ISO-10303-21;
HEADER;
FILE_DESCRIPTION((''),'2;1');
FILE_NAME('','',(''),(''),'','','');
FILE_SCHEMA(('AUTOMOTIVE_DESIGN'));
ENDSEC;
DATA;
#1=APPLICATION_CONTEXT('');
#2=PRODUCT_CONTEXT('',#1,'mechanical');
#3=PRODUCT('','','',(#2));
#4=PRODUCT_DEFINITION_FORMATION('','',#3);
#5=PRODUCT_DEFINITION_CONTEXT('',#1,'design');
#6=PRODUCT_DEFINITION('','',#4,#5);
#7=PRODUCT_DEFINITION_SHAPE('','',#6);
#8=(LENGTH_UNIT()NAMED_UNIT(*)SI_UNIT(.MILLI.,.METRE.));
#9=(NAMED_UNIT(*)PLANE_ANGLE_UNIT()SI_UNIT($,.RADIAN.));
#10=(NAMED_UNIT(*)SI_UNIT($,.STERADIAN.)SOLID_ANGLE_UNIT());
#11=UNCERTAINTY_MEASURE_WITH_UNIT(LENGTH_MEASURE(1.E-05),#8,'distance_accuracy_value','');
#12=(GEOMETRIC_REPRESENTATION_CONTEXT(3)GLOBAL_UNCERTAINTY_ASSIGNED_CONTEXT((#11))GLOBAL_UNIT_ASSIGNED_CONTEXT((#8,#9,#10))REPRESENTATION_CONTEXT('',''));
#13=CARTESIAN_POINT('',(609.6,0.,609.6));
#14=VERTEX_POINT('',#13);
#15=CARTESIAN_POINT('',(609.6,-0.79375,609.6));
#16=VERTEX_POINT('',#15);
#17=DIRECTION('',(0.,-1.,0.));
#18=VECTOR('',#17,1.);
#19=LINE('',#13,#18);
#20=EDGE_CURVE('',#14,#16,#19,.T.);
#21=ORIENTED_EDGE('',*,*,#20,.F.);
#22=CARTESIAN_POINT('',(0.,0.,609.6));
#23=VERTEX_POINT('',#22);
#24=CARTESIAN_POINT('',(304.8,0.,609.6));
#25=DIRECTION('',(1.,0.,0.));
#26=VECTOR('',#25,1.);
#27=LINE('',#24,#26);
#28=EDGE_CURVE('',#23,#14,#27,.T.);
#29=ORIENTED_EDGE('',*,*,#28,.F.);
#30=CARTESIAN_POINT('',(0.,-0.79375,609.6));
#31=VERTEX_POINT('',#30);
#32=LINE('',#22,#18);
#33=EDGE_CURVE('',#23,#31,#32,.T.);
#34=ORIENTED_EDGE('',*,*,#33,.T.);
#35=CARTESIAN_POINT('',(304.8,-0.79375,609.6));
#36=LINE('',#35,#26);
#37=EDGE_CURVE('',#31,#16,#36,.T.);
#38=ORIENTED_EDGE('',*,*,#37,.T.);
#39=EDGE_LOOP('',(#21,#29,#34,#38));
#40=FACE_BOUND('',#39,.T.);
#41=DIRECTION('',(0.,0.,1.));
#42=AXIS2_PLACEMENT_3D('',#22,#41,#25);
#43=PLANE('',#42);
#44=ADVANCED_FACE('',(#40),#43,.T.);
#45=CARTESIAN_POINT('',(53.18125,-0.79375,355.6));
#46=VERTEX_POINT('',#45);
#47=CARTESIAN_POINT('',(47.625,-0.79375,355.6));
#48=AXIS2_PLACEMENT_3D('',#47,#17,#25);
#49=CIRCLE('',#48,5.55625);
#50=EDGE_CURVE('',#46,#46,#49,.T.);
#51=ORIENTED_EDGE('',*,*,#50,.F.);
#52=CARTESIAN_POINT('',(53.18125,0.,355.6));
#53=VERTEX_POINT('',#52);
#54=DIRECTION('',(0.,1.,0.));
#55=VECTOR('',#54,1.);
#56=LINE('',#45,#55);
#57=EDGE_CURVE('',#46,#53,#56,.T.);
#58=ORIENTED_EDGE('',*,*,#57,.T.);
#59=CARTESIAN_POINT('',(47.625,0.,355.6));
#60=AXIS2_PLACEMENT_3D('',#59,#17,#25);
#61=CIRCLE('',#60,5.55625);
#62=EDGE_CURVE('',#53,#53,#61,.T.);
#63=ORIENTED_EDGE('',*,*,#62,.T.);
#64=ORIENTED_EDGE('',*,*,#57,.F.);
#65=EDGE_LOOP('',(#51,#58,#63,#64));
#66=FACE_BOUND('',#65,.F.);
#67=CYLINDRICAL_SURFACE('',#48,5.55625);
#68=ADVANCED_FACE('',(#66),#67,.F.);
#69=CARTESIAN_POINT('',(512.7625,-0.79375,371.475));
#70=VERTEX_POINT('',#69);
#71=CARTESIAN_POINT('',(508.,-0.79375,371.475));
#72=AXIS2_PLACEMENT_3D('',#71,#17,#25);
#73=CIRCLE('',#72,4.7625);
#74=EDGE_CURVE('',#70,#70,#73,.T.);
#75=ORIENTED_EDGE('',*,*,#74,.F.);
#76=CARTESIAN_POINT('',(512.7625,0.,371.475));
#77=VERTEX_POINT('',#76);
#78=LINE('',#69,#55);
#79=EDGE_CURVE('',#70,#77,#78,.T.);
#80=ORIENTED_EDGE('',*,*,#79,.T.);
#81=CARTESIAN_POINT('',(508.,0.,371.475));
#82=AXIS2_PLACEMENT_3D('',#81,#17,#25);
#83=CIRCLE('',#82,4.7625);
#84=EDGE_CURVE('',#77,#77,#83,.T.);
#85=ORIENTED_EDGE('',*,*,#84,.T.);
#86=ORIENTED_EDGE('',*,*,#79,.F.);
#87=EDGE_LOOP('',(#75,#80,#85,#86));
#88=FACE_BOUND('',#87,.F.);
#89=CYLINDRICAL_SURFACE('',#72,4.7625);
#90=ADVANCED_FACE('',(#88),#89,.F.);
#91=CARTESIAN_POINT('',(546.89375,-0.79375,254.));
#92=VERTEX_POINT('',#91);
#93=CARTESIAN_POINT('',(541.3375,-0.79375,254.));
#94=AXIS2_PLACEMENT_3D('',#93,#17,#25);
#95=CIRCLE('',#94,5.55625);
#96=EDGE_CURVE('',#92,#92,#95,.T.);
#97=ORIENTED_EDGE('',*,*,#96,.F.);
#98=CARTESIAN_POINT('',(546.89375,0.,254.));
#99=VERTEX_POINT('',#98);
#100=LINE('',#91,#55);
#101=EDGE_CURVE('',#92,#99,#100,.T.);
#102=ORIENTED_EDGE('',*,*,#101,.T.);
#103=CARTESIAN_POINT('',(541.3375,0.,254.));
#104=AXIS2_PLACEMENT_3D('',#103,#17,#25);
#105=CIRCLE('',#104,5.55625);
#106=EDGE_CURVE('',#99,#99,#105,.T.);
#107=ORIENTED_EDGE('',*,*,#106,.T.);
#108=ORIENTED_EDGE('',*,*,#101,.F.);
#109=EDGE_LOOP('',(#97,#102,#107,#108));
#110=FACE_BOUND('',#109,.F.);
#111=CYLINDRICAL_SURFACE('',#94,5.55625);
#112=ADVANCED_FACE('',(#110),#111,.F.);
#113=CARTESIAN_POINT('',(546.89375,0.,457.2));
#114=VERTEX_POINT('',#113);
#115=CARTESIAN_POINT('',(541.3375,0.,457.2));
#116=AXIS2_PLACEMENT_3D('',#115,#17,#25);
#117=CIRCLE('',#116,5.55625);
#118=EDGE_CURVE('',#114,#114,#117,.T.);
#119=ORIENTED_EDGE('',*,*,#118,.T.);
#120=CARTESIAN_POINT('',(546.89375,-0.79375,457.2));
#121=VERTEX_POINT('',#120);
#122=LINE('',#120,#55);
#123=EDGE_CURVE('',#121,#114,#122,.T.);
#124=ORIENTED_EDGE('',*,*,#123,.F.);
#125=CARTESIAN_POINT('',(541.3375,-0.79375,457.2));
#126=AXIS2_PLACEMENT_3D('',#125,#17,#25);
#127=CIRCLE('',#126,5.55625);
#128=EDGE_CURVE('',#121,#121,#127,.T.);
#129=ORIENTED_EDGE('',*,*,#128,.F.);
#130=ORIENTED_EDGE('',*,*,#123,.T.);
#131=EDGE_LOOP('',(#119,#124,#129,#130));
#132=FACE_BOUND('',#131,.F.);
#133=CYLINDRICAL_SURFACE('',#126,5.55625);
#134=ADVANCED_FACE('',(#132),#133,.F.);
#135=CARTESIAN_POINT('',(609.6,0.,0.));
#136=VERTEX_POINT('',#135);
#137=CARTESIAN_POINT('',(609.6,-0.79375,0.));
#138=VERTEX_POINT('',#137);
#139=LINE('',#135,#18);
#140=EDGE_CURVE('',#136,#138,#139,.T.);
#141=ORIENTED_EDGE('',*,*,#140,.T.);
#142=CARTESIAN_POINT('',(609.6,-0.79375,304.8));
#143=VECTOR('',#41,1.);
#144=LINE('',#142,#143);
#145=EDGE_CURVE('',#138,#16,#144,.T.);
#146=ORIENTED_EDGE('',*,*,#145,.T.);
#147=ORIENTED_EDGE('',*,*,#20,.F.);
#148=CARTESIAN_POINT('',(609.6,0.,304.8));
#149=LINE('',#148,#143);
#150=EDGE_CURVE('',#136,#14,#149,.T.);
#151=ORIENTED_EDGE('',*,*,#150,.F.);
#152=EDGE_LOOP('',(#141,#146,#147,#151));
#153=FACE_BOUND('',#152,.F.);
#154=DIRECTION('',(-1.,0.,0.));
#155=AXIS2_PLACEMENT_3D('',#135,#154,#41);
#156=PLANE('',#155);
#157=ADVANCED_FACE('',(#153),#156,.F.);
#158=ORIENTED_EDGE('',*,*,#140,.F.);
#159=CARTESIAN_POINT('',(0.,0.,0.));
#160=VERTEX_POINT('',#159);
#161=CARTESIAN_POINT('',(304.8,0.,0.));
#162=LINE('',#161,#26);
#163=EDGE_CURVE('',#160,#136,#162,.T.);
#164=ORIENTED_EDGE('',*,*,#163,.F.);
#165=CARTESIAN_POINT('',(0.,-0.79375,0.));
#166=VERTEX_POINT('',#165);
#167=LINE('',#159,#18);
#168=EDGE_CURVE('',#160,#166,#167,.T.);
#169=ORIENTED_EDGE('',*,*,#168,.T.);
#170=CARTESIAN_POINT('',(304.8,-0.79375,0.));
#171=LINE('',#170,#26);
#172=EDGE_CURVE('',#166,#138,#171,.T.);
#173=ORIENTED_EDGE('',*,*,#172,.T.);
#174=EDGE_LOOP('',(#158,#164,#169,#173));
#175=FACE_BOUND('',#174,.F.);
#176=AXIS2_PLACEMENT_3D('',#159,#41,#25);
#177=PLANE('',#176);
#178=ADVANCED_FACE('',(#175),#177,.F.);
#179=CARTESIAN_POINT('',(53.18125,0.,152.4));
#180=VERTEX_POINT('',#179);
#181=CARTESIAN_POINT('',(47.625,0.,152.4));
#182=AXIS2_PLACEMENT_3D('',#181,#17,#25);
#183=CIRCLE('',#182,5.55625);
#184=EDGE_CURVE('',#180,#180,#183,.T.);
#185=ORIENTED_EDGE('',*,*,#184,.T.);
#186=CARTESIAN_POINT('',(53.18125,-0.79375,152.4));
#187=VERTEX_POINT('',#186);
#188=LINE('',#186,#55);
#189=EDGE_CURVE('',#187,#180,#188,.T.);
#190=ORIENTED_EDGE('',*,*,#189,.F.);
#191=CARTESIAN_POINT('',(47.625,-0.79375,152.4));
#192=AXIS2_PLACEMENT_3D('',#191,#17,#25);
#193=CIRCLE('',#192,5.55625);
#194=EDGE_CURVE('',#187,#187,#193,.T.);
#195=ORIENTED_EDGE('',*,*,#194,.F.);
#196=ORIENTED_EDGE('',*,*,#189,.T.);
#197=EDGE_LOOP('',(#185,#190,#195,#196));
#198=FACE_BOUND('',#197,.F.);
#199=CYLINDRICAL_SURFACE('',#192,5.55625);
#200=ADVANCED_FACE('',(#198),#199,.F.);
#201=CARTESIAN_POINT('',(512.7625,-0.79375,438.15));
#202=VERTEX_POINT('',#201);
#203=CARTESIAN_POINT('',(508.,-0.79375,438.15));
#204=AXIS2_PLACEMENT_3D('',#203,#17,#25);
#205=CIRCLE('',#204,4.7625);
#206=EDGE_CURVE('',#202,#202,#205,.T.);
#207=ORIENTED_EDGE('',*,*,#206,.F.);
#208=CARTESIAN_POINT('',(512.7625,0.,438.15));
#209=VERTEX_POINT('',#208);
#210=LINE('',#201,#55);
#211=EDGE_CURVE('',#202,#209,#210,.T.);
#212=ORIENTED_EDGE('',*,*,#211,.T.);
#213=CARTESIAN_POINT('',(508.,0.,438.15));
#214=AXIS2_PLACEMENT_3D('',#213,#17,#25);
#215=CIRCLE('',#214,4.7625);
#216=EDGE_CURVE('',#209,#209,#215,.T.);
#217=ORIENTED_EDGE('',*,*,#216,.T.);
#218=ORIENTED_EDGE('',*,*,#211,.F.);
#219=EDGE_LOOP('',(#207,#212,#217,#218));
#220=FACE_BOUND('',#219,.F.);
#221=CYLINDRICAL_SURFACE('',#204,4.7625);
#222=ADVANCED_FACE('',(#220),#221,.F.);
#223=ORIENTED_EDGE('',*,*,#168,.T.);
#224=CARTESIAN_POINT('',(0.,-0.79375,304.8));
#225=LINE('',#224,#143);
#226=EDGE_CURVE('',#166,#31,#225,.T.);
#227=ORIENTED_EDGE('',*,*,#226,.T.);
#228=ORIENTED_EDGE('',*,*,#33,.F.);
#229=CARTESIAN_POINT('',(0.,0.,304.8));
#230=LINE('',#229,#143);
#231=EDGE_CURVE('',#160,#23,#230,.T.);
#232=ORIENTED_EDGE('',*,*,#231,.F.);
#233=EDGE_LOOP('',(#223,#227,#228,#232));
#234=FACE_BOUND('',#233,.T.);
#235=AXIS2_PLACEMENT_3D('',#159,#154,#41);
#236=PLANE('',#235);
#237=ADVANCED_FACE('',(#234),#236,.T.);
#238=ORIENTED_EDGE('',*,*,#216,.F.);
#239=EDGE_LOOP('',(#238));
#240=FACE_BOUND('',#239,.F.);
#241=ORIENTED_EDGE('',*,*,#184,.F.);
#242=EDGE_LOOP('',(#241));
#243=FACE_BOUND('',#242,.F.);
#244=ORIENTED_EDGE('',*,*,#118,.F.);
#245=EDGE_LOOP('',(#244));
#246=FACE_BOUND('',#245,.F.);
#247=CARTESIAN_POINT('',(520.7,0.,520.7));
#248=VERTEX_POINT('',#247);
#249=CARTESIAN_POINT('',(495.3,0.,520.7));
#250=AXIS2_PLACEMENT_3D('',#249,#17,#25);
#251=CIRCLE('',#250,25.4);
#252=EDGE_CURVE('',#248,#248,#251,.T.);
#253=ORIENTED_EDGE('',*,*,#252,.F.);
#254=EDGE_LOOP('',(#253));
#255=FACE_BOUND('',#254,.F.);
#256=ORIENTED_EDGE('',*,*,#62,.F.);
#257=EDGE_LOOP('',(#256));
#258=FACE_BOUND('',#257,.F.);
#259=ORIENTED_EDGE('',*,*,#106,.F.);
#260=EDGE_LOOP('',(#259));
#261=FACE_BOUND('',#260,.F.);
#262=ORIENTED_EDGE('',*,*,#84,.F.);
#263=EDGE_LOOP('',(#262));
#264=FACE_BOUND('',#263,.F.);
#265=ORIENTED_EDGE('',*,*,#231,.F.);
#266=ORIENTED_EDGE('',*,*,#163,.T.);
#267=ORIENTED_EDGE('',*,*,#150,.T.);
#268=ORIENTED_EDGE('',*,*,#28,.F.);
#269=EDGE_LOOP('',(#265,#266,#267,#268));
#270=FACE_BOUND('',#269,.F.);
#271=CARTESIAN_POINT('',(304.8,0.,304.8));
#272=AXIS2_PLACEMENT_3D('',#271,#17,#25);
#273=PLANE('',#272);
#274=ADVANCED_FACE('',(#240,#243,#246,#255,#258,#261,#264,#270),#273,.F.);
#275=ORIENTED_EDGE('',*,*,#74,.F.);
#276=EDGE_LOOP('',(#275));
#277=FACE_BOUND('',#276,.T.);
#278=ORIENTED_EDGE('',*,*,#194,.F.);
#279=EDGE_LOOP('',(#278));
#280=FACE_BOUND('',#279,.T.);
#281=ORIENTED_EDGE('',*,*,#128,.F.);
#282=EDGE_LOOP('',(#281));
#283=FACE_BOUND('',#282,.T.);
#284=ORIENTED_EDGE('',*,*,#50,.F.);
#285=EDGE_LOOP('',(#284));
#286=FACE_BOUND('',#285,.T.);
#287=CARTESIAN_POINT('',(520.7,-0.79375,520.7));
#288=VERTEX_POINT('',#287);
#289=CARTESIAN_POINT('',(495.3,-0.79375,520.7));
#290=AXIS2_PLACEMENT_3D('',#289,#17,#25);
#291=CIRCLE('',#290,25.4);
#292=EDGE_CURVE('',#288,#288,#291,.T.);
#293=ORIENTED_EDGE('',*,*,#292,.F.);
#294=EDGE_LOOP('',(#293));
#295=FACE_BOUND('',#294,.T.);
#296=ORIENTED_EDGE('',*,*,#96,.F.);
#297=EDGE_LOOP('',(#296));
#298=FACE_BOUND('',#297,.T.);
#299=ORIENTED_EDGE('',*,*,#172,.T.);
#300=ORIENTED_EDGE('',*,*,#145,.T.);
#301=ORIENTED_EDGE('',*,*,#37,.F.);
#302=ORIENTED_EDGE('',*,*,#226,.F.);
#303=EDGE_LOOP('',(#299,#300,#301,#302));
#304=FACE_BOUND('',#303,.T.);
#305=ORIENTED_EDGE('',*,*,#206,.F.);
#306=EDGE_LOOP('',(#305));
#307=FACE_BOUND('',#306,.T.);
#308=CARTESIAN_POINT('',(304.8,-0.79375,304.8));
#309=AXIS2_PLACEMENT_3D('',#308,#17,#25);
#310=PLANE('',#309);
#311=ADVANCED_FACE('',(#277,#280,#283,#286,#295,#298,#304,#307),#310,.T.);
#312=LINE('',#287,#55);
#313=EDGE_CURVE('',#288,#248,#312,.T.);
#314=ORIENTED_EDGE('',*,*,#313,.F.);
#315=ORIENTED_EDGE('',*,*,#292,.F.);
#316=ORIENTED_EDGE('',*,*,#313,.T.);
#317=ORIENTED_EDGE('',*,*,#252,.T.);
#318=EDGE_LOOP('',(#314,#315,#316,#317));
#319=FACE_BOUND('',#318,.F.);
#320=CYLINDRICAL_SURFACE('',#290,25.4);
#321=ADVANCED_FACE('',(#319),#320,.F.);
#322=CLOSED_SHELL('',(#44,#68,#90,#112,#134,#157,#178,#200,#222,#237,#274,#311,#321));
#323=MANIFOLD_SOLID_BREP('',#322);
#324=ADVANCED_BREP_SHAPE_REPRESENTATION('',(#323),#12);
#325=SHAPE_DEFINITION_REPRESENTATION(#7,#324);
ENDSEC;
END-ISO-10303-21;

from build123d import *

# Parameters (mm, degrees)
F0_W     = 609.6
F0_H     = 609.6
F1_DEPTH = 0.79375
F2_R     = 5.55625
F3_DEPTH = 25.4
F4_R     = 25.4
F4_R_2   = 4.7625
F5_DEPTH = 25.4


# Not quite as in the source:
# - a feature names something its author has since deleted; it is built from what else it names


with BuildPart() as f1:
    # F0 (on Front) → F1 (new body)
    with BuildSketch(Plane.XZ):
        with Locations((304.8, 304.8)):
            Rectangle(F0_W, F0_H)
    extrude(amount=F1_DEPTH)

    # F2 (on face) → F3 (cut)
    with BuildSketch(Plane.XZ.offset(0.79375)):
        with Locations((47.625, 355.6)):
            Circle(F2_R)
        with Locations((47.625, 152.4)):
            Circle(F2_R)
        with Locations((541.3375, 254)):
            Circle(F2_R)
        with Locations((541.3375, 457.2)):
            Circle(F2_R)
    extrude(amount=-F3_DEPTH, mode=Mode.SUBTRACT)

    # F4 (on face) → F5 (cut)
    with BuildSketch(Plane.XZ.offset(0.79375)):
        with Locations((495.3, 520.7)):
            Circle(F4_R)
        with Locations((508, 438.15)):
            Circle(F4_R_2)
        with Locations((508, 371.475)):
            Circle(F4_R_2)
    extrude(amount=-F5_DEPTH, mode=Mode.SUBTRACT)


solid = f1.part
